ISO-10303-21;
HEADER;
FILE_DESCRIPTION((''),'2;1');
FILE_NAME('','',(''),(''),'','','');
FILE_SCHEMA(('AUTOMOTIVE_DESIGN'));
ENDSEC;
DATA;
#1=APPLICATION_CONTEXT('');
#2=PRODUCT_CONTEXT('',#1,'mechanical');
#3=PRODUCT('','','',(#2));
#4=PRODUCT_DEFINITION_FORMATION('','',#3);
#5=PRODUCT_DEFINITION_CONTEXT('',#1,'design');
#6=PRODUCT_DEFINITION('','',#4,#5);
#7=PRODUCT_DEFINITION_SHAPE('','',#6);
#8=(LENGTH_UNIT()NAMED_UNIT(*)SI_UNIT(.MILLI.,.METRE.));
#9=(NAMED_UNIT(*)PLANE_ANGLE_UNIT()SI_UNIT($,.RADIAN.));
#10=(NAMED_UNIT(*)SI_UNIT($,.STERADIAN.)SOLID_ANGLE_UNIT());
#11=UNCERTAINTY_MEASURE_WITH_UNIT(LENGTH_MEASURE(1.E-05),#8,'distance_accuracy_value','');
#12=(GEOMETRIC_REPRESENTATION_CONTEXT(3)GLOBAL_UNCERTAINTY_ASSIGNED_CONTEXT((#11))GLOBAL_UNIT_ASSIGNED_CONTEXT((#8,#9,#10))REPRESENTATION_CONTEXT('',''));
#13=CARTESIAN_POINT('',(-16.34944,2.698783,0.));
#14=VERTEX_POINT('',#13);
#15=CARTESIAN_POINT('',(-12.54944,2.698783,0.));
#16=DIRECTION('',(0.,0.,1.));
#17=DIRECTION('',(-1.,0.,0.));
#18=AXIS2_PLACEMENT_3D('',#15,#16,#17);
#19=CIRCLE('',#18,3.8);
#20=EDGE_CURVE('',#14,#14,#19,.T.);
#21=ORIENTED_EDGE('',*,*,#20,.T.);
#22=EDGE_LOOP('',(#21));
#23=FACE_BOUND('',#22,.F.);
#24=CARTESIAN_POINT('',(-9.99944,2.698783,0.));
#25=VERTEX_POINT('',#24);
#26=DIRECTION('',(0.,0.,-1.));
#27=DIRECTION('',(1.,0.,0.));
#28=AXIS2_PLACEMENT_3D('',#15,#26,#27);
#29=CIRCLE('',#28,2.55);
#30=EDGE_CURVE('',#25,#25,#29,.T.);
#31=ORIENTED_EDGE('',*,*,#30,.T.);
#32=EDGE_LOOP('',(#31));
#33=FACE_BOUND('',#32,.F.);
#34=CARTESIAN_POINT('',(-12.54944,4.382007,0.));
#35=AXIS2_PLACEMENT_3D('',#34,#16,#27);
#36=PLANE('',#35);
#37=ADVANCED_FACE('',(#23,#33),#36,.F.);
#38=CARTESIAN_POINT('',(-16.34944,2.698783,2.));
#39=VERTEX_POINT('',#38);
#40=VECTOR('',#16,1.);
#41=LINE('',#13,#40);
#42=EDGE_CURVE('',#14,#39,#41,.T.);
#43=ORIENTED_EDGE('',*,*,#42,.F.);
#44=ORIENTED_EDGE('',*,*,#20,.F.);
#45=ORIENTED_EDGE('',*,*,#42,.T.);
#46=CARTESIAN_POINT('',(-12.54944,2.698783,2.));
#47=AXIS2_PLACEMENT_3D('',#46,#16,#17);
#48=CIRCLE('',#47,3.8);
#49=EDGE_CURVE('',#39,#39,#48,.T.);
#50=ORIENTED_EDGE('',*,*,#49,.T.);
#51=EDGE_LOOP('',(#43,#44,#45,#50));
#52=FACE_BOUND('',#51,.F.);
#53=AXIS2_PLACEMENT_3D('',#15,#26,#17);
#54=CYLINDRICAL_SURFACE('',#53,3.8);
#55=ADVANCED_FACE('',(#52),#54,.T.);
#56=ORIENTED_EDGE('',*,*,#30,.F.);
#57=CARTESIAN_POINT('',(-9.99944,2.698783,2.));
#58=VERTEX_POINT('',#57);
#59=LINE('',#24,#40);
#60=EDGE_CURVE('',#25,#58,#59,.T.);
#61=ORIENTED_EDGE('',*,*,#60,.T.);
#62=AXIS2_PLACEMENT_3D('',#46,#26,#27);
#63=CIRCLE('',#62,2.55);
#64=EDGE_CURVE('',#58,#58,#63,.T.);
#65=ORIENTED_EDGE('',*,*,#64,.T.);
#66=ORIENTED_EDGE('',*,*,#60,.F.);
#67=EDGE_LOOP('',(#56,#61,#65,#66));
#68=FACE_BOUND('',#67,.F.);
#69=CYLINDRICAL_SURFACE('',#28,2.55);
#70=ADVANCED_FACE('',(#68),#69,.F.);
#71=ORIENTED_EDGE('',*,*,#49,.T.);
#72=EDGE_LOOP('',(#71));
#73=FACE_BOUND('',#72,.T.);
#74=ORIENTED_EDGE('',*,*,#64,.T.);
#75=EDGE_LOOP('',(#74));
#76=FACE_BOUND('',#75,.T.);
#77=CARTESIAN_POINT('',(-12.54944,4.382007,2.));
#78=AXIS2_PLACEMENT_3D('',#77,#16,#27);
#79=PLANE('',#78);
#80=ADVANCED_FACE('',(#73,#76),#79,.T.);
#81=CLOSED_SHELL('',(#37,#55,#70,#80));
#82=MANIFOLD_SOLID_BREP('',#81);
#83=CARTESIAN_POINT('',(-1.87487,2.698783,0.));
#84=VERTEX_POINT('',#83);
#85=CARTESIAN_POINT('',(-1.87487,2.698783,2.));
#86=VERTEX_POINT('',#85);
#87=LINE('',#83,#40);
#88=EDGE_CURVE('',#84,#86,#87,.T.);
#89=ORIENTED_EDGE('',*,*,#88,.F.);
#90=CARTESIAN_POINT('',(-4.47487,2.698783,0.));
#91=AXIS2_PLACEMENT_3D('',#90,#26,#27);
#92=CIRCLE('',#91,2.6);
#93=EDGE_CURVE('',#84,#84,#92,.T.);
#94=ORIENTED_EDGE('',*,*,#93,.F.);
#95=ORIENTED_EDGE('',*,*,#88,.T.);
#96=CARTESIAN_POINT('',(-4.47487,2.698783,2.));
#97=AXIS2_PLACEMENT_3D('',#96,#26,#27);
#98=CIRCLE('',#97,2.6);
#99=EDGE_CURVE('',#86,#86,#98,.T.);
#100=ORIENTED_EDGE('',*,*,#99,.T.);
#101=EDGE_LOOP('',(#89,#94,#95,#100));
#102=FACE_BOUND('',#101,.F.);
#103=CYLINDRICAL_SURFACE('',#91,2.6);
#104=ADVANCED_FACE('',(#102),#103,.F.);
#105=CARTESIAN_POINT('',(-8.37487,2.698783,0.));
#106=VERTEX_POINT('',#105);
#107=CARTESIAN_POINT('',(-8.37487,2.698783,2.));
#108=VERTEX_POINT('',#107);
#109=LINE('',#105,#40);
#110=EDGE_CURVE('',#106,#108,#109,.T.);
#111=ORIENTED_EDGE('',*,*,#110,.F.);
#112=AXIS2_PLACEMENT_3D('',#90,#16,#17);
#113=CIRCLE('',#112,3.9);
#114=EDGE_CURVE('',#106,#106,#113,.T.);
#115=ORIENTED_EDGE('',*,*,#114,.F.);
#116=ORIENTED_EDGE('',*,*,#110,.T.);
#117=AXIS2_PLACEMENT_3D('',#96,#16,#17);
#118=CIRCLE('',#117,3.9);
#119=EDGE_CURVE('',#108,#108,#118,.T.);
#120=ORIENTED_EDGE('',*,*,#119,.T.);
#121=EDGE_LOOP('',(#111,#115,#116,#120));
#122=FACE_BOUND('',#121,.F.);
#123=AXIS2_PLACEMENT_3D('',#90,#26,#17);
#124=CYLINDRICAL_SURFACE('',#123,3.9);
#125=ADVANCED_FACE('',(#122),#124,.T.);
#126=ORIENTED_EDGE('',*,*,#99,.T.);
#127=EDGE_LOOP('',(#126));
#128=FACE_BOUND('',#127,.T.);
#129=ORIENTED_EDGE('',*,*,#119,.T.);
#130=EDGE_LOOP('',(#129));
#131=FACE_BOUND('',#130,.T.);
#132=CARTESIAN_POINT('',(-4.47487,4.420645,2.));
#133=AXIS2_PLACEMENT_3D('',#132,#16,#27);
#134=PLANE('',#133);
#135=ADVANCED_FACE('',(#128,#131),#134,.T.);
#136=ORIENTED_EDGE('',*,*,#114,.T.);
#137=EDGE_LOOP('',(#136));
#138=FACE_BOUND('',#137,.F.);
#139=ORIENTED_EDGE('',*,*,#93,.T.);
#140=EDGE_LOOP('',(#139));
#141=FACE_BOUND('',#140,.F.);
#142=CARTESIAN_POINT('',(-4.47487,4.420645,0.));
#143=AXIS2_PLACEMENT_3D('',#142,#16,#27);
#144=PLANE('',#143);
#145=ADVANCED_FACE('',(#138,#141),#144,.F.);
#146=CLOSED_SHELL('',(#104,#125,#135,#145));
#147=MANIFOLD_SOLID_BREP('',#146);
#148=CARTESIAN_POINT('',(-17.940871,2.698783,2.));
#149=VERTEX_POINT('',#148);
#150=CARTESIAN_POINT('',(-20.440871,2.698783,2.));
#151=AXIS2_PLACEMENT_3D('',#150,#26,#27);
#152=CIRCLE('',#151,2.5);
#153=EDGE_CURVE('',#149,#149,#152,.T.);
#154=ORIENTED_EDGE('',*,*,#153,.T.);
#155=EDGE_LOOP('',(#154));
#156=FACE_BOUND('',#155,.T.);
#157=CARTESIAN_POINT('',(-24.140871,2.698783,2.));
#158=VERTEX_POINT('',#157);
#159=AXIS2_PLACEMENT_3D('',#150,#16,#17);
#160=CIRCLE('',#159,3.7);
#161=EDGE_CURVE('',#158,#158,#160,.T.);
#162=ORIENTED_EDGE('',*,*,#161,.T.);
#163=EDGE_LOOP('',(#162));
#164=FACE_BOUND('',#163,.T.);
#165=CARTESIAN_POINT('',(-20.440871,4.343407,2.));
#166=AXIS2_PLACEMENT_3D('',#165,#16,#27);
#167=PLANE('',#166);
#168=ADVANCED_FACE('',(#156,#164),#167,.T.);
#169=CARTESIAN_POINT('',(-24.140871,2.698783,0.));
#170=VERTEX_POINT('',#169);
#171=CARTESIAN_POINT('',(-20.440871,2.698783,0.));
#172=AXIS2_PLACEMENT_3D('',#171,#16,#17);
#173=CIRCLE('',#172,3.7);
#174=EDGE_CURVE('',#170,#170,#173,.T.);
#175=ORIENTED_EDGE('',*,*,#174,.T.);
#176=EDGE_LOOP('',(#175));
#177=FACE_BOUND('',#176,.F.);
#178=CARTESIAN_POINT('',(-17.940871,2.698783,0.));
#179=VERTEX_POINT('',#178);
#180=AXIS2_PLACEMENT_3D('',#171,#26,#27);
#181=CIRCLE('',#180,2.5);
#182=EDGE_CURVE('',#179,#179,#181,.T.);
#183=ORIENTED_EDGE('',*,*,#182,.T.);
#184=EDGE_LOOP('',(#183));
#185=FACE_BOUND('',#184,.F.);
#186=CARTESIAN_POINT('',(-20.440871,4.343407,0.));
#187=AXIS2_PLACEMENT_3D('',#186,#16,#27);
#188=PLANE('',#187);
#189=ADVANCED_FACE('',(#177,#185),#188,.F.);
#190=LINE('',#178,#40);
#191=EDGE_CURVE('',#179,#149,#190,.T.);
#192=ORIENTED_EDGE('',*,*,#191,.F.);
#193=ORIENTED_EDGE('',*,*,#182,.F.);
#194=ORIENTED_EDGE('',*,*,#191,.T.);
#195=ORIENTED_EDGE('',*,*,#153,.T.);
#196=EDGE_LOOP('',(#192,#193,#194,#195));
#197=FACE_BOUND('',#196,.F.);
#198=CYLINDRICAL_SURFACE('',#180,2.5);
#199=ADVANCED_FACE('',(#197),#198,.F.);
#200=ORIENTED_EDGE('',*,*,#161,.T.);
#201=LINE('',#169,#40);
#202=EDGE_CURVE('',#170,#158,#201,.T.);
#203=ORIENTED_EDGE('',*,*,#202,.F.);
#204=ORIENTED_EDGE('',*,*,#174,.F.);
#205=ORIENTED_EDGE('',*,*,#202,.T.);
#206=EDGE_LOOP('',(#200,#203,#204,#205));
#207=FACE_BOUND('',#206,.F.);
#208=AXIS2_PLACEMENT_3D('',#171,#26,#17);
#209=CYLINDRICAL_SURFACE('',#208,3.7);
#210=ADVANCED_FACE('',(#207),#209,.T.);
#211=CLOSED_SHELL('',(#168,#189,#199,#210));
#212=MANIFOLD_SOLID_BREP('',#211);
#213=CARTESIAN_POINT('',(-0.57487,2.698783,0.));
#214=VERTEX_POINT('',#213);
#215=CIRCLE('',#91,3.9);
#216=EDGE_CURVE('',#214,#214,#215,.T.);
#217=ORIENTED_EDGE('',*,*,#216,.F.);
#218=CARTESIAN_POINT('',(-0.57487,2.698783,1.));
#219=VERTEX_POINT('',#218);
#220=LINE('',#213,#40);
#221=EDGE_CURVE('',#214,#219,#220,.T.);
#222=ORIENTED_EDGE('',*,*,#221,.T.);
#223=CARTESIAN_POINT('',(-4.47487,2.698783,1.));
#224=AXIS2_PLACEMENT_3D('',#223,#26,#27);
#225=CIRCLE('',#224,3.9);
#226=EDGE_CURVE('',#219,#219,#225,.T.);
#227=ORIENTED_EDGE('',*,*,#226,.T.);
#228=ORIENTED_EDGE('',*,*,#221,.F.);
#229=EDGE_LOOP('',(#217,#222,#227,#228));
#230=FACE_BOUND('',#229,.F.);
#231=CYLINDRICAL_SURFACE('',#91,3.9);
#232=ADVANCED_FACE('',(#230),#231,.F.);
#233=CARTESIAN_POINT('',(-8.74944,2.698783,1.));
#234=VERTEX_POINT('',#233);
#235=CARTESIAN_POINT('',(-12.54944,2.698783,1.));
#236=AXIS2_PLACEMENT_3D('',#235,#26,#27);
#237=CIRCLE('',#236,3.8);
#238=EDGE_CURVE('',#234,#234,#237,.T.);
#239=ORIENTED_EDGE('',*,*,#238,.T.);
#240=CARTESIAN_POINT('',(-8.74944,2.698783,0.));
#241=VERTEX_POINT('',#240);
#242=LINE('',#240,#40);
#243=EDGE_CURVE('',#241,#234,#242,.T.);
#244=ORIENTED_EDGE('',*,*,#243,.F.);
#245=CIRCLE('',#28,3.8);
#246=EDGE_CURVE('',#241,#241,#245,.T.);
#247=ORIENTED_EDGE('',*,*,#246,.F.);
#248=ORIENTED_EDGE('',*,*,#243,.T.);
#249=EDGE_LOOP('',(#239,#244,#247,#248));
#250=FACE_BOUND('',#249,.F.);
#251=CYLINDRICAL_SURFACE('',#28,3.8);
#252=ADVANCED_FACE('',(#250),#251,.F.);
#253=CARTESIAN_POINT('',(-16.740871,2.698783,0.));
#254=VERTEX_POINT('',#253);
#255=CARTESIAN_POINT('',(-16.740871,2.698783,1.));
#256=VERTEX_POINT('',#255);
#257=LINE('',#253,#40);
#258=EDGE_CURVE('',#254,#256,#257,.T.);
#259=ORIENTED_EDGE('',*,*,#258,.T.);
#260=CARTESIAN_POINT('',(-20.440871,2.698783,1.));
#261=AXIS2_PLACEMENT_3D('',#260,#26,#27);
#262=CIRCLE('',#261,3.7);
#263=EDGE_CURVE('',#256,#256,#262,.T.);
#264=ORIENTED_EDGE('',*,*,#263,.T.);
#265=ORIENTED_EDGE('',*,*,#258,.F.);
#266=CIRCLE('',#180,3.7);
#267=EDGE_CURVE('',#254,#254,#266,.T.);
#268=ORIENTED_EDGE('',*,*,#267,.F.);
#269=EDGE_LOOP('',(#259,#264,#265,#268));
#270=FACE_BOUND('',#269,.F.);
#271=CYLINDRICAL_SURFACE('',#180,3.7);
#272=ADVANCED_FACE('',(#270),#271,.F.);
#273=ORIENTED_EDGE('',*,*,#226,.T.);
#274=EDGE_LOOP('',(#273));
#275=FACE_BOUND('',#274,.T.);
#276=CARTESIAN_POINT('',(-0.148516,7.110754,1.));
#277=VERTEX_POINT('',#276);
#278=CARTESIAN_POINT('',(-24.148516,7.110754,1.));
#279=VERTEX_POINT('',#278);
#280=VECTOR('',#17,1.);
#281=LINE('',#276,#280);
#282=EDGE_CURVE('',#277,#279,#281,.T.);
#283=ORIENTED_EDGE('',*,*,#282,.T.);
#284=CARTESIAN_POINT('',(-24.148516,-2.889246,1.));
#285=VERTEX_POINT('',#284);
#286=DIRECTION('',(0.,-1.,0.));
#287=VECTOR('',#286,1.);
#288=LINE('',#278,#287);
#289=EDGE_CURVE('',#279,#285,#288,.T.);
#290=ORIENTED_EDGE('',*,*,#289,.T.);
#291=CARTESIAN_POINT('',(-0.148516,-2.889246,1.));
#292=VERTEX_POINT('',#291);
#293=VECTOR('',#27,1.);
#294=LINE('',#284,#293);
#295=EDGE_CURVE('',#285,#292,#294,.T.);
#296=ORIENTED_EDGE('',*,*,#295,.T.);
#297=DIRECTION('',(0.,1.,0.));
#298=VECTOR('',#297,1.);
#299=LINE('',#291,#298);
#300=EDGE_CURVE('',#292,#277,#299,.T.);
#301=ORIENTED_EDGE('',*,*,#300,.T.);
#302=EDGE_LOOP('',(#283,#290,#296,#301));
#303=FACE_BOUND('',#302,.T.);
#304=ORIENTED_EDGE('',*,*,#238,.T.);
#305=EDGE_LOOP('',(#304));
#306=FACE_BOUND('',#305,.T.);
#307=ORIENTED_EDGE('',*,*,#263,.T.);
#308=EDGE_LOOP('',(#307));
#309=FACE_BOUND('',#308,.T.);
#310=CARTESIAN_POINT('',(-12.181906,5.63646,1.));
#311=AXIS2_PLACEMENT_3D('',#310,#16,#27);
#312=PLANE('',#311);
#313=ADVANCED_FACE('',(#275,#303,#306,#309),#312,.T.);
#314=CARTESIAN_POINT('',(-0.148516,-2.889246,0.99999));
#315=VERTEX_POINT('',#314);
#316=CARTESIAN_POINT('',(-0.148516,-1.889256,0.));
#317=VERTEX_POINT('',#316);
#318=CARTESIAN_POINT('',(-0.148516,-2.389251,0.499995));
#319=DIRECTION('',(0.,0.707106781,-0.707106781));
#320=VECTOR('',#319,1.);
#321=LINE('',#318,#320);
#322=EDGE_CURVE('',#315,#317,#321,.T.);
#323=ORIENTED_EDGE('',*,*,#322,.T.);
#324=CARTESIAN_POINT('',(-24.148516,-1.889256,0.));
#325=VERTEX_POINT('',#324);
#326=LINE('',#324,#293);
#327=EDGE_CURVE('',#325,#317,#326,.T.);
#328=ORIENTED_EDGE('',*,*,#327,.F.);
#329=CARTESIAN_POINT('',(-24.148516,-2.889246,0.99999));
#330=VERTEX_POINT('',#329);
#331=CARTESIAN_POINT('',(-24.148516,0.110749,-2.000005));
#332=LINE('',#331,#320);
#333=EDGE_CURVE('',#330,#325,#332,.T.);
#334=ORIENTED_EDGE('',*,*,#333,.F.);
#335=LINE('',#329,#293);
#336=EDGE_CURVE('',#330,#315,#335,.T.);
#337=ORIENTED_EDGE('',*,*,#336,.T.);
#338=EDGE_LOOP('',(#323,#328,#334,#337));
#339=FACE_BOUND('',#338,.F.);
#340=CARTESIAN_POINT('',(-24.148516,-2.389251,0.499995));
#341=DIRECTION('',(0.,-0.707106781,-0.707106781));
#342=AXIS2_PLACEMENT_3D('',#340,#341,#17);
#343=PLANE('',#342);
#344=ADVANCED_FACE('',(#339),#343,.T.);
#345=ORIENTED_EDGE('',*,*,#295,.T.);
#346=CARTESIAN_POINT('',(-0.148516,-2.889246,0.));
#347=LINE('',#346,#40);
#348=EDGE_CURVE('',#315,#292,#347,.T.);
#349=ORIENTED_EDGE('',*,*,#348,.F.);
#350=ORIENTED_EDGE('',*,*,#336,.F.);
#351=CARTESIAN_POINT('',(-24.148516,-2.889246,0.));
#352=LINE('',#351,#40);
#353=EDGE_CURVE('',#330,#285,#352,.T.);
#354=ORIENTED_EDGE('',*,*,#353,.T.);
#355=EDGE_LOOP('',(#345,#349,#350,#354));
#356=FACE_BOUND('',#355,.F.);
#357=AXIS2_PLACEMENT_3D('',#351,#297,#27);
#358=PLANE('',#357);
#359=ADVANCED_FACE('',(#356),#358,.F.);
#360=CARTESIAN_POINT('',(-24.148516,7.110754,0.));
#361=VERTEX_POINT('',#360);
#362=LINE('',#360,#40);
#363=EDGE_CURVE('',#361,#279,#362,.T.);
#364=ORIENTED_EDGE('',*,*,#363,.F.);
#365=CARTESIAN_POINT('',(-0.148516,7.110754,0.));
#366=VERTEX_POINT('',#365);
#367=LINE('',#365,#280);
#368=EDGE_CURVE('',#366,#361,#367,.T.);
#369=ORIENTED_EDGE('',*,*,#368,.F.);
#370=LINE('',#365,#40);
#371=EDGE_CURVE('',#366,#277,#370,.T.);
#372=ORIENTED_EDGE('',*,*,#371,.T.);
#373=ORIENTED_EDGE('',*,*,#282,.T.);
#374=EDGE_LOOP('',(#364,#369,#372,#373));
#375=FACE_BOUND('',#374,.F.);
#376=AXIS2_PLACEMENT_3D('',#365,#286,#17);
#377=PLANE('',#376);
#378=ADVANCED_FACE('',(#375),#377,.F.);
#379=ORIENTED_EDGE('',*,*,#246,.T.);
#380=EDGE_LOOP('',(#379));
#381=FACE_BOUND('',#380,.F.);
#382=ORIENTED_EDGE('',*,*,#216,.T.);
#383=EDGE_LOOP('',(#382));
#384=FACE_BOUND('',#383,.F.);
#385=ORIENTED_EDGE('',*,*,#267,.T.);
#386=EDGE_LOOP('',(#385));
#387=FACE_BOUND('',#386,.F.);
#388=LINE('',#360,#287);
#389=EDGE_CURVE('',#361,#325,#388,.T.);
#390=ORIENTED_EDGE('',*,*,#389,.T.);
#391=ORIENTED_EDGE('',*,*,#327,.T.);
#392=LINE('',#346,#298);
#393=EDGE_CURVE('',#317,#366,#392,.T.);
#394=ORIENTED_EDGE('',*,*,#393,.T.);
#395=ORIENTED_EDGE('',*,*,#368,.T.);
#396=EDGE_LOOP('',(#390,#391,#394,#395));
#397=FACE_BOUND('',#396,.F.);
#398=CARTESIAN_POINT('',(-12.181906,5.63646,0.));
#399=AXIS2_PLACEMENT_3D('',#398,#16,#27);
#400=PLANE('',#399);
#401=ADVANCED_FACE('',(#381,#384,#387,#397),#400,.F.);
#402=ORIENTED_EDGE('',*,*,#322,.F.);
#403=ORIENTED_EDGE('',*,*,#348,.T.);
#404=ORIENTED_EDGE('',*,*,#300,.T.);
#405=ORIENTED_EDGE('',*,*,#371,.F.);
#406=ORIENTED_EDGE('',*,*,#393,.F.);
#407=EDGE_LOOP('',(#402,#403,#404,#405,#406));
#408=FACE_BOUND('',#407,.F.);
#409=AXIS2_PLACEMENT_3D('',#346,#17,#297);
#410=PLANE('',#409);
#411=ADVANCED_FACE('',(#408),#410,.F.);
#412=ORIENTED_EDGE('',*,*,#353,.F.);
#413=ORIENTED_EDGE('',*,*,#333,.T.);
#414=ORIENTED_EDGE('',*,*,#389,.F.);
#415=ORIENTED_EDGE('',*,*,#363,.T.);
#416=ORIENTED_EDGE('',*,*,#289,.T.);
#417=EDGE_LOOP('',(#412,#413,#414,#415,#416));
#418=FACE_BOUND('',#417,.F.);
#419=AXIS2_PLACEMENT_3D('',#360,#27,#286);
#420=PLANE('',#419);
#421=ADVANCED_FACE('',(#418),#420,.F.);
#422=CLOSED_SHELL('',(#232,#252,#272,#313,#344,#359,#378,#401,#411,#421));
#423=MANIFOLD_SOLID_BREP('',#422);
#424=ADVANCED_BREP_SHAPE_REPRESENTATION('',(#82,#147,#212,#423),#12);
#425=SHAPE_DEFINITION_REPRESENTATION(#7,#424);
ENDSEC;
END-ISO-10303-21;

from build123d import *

# Parameters (mm, degrees)
F1_DEPTH = 2
F2_DEPTH = 1
F3_SIZE  = 0.99999


# Not quite as in the source:
# - a fillet or chamfer is up to 0.001 mm smaller than in the source, because OpenCascade refuses the exact size


with BuildPart() as f1:
    # F0 (on Top) → F1 (new body)
    with BuildSketch(Plane.XY):
        with BuildLine():
            ThreePointArc((-16.7408706831, 2.6987831955), (-20.4408706831, 6.3987831955), (-24.1408706831, 2.6987831955))
            Line((-24.1408706831, 2.6987831955), (-22.9408706831, 2.6987831955))
            ThreePointArc((-22.9408706831, 2.6987831955), (-20.4408706831, 5.1987831955), (-17.9408706831, 2.6987831955))
            Line((-17.9408706831, 2.6987831955), (-16.7408706831, 2.6987831955))
        make_face()
        with BuildLine():
            Line((-22.9408706831, 2.6987831955), (-24.1408706831, 2.6987831955))
            ThreePointArc((-24.1408706831, 2.6987831955), (-20.4408706831, -1.0012168045), (-16.7408706831, 2.6987831955))
            Line((-16.7408706831, 2.6987831955), (-17.9408706831, 2.6987831955))
            ThreePointArc((-17.9408706831, 2.6987831955), (-20.4408706831, 0.1987831955), (-22.9408706831, 2.6987831955))
        make_face()
    extrude(amount=F1_DEPTH)


with BuildPart() as f1b:
    # F0 (on Top) → F1, piece 2 (new body)
    with BuildSketch(Plane.XY):
        with BuildLine():
            ThreePointArc((-8.7494403885, 2.6987831955), (-12.5494403885, 6.4987831955), (-16.3494403885, 2.6987831955))
            Line((-16.3494403885, 2.6987831955), (-15.0994403885, 2.6987831955))
            ThreePointArc((-15.0994403885, 2.6987831955), (-12.5494403885, 5.2487831955), (-9.9994403885, 2.6987831955))
            Line((-9.9994403885, 2.6987831955), (-8.7494403885, 2.6987831955))
        make_face()
        with BuildLine():
            Line((-15.0994403885, 2.6987831955), (-16.3494403885, 2.6987831955))
            ThreePointArc((-16.3494403885, 2.6987831955), (-12.5494403885, -1.1012168045), (-8.7494403885, 2.6987831955))
            Line((-8.7494403885, 2.6987831955), (-9.9994403885, 2.6987831955))
            ThreePointArc((-9.9994403885, 2.6987831955), (-12.5494403885, 0.1487831955), (-15.0994403885, 2.6987831955))
        make_face()
    extrude(amount=F1_DEPTH)


with BuildPart() as f1c:
    # F0 (on Top) → F1, piece 3 (new body)
    with BuildSketch(Plane.XY):
        with BuildLine():
            Line((-1.874870298, 2.6987831955), (-0.574870298, 2.6987831955))
            ThreePointArc((-0.574870298, 2.6987831955), (-4.474870298, 6.5987831955), (-8.374870298, 2.6987831955))
            Line((-8.374870298, 2.6987831955), (-7.074870298, 2.6987831955))
            ThreePointArc((-7.074870298, 2.6987831955), (-4.474870298, 5.2987831955), (-1.874870298, 2.6987831955))
        make_face()
        with BuildLine():
            ThreePointArc((-8.374870298, 2.6987831955), (-4.474870298, -1.2012168045), (-0.574870298, 2.6987831955))
            Line((-0.574870298, 2.6987831955), (-1.874870298, 2.6987831955))
            ThreePointArc((-1.874870298, 2.6987831955), (-4.474870298, 0.0987831955), (-7.074870298, 2.6987831955))
            Line((-7.074870298, 2.6987831955), (-8.374870298, 2.6987831955))
        make_face()
    extrude(amount=F1_DEPTH)


with BuildPart() as f2:
    # F0 (on Top) → F2 (new body)
    with BuildSketch(Plane.XY):
        with BuildLine():
            Line((-0.1485164072, 7.1107540186), (-24.1485164072, 7.1107540186))
            Line((-24.1485164072, 7.1107540186), (-24.1485164072, 2.6987831955))
            Line((-24.1485164072, 2.6987831955), (-24.1408706831, 2.6987831955))
            ThreePointArc((-24.1408706831, 2.6987831955), (-20.4408706831, 6.3987831955), (-16.7408706831, 2.6987831955))
            Line((-16.7408706831, 2.6987831955), (-16.3494403885, 2.6987831955))
            ThreePointArc((-16.3494403885, 2.6987831955), (-12.5494403885, 6.4987831955), (-8.7494403885, 2.6987831955))
            Line((-8.7494403885, 2.6987831955), (-8.374870298, 2.6987831955))
            ThreePointArc((-8.374870298, 2.6987831955), (-4.474870298, 6.5987831955), (-0.574870298, 2.6987831955))
            Line((-0.574870298, 2.6987831955), (-0.1485164072, 2.6987831955))
            Line((-0.1485164072, 2.6987831955), (-0.1485164072, 7.1107540186))
        make_face()
        with BuildLine():
            Line((-24.1408706831, 2.6987831955), (-24.1485164072, 2.6987831955))
            Line((-24.1485164072, 2.6987831955), (-24.1485164072, -2.8892459814))
            Line((-24.1485164072, -2.8892459814), (-0.1485164072, -2.8892459814))
            Line((-0.1485164072, -2.8892459814), (-0.1485164072, 2.6987831955))
            Line((-0.1485164072, 2.6987831955), (-0.574870298, 2.6987831955))
            ThreePointArc((-0.574870298, 2.6987831955), (-4.474870298, -1.2012168045), (-8.374870298, 2.6987831955))
            Line((-8.374870298, 2.6987831955), (-8.7494403885, 2.6987831955))
            ThreePointArc((-8.7494403885, 2.6987831955), (-12.5494403885, -1.1012168045), (-16.3494403885, 2.6987831955))
            Line((-16.3494403885, 2.6987831955), (-16.7408706831, 2.6987831955))
            ThreePointArc((-16.7408706831, 2.6987831955), (-20.4408706831, -1.0012168045), (-24.1408706831, 2.6987831955))
        make_face()
    extrude(amount=F2_DEPTH)

    # F3 (size 1 in the source; OpenCascade refuses exactly that, so slightly less here)
    f3_edges = [f2.edges().sort_by_distance(p)[0] for p in [
        (-12.148516, -2.889246, 0),
    ]]
    chamfer(f3_edges, length=F3_SIZE)


solid = Compound([f1.part, f1b.part, f1c.part, f2.part])
